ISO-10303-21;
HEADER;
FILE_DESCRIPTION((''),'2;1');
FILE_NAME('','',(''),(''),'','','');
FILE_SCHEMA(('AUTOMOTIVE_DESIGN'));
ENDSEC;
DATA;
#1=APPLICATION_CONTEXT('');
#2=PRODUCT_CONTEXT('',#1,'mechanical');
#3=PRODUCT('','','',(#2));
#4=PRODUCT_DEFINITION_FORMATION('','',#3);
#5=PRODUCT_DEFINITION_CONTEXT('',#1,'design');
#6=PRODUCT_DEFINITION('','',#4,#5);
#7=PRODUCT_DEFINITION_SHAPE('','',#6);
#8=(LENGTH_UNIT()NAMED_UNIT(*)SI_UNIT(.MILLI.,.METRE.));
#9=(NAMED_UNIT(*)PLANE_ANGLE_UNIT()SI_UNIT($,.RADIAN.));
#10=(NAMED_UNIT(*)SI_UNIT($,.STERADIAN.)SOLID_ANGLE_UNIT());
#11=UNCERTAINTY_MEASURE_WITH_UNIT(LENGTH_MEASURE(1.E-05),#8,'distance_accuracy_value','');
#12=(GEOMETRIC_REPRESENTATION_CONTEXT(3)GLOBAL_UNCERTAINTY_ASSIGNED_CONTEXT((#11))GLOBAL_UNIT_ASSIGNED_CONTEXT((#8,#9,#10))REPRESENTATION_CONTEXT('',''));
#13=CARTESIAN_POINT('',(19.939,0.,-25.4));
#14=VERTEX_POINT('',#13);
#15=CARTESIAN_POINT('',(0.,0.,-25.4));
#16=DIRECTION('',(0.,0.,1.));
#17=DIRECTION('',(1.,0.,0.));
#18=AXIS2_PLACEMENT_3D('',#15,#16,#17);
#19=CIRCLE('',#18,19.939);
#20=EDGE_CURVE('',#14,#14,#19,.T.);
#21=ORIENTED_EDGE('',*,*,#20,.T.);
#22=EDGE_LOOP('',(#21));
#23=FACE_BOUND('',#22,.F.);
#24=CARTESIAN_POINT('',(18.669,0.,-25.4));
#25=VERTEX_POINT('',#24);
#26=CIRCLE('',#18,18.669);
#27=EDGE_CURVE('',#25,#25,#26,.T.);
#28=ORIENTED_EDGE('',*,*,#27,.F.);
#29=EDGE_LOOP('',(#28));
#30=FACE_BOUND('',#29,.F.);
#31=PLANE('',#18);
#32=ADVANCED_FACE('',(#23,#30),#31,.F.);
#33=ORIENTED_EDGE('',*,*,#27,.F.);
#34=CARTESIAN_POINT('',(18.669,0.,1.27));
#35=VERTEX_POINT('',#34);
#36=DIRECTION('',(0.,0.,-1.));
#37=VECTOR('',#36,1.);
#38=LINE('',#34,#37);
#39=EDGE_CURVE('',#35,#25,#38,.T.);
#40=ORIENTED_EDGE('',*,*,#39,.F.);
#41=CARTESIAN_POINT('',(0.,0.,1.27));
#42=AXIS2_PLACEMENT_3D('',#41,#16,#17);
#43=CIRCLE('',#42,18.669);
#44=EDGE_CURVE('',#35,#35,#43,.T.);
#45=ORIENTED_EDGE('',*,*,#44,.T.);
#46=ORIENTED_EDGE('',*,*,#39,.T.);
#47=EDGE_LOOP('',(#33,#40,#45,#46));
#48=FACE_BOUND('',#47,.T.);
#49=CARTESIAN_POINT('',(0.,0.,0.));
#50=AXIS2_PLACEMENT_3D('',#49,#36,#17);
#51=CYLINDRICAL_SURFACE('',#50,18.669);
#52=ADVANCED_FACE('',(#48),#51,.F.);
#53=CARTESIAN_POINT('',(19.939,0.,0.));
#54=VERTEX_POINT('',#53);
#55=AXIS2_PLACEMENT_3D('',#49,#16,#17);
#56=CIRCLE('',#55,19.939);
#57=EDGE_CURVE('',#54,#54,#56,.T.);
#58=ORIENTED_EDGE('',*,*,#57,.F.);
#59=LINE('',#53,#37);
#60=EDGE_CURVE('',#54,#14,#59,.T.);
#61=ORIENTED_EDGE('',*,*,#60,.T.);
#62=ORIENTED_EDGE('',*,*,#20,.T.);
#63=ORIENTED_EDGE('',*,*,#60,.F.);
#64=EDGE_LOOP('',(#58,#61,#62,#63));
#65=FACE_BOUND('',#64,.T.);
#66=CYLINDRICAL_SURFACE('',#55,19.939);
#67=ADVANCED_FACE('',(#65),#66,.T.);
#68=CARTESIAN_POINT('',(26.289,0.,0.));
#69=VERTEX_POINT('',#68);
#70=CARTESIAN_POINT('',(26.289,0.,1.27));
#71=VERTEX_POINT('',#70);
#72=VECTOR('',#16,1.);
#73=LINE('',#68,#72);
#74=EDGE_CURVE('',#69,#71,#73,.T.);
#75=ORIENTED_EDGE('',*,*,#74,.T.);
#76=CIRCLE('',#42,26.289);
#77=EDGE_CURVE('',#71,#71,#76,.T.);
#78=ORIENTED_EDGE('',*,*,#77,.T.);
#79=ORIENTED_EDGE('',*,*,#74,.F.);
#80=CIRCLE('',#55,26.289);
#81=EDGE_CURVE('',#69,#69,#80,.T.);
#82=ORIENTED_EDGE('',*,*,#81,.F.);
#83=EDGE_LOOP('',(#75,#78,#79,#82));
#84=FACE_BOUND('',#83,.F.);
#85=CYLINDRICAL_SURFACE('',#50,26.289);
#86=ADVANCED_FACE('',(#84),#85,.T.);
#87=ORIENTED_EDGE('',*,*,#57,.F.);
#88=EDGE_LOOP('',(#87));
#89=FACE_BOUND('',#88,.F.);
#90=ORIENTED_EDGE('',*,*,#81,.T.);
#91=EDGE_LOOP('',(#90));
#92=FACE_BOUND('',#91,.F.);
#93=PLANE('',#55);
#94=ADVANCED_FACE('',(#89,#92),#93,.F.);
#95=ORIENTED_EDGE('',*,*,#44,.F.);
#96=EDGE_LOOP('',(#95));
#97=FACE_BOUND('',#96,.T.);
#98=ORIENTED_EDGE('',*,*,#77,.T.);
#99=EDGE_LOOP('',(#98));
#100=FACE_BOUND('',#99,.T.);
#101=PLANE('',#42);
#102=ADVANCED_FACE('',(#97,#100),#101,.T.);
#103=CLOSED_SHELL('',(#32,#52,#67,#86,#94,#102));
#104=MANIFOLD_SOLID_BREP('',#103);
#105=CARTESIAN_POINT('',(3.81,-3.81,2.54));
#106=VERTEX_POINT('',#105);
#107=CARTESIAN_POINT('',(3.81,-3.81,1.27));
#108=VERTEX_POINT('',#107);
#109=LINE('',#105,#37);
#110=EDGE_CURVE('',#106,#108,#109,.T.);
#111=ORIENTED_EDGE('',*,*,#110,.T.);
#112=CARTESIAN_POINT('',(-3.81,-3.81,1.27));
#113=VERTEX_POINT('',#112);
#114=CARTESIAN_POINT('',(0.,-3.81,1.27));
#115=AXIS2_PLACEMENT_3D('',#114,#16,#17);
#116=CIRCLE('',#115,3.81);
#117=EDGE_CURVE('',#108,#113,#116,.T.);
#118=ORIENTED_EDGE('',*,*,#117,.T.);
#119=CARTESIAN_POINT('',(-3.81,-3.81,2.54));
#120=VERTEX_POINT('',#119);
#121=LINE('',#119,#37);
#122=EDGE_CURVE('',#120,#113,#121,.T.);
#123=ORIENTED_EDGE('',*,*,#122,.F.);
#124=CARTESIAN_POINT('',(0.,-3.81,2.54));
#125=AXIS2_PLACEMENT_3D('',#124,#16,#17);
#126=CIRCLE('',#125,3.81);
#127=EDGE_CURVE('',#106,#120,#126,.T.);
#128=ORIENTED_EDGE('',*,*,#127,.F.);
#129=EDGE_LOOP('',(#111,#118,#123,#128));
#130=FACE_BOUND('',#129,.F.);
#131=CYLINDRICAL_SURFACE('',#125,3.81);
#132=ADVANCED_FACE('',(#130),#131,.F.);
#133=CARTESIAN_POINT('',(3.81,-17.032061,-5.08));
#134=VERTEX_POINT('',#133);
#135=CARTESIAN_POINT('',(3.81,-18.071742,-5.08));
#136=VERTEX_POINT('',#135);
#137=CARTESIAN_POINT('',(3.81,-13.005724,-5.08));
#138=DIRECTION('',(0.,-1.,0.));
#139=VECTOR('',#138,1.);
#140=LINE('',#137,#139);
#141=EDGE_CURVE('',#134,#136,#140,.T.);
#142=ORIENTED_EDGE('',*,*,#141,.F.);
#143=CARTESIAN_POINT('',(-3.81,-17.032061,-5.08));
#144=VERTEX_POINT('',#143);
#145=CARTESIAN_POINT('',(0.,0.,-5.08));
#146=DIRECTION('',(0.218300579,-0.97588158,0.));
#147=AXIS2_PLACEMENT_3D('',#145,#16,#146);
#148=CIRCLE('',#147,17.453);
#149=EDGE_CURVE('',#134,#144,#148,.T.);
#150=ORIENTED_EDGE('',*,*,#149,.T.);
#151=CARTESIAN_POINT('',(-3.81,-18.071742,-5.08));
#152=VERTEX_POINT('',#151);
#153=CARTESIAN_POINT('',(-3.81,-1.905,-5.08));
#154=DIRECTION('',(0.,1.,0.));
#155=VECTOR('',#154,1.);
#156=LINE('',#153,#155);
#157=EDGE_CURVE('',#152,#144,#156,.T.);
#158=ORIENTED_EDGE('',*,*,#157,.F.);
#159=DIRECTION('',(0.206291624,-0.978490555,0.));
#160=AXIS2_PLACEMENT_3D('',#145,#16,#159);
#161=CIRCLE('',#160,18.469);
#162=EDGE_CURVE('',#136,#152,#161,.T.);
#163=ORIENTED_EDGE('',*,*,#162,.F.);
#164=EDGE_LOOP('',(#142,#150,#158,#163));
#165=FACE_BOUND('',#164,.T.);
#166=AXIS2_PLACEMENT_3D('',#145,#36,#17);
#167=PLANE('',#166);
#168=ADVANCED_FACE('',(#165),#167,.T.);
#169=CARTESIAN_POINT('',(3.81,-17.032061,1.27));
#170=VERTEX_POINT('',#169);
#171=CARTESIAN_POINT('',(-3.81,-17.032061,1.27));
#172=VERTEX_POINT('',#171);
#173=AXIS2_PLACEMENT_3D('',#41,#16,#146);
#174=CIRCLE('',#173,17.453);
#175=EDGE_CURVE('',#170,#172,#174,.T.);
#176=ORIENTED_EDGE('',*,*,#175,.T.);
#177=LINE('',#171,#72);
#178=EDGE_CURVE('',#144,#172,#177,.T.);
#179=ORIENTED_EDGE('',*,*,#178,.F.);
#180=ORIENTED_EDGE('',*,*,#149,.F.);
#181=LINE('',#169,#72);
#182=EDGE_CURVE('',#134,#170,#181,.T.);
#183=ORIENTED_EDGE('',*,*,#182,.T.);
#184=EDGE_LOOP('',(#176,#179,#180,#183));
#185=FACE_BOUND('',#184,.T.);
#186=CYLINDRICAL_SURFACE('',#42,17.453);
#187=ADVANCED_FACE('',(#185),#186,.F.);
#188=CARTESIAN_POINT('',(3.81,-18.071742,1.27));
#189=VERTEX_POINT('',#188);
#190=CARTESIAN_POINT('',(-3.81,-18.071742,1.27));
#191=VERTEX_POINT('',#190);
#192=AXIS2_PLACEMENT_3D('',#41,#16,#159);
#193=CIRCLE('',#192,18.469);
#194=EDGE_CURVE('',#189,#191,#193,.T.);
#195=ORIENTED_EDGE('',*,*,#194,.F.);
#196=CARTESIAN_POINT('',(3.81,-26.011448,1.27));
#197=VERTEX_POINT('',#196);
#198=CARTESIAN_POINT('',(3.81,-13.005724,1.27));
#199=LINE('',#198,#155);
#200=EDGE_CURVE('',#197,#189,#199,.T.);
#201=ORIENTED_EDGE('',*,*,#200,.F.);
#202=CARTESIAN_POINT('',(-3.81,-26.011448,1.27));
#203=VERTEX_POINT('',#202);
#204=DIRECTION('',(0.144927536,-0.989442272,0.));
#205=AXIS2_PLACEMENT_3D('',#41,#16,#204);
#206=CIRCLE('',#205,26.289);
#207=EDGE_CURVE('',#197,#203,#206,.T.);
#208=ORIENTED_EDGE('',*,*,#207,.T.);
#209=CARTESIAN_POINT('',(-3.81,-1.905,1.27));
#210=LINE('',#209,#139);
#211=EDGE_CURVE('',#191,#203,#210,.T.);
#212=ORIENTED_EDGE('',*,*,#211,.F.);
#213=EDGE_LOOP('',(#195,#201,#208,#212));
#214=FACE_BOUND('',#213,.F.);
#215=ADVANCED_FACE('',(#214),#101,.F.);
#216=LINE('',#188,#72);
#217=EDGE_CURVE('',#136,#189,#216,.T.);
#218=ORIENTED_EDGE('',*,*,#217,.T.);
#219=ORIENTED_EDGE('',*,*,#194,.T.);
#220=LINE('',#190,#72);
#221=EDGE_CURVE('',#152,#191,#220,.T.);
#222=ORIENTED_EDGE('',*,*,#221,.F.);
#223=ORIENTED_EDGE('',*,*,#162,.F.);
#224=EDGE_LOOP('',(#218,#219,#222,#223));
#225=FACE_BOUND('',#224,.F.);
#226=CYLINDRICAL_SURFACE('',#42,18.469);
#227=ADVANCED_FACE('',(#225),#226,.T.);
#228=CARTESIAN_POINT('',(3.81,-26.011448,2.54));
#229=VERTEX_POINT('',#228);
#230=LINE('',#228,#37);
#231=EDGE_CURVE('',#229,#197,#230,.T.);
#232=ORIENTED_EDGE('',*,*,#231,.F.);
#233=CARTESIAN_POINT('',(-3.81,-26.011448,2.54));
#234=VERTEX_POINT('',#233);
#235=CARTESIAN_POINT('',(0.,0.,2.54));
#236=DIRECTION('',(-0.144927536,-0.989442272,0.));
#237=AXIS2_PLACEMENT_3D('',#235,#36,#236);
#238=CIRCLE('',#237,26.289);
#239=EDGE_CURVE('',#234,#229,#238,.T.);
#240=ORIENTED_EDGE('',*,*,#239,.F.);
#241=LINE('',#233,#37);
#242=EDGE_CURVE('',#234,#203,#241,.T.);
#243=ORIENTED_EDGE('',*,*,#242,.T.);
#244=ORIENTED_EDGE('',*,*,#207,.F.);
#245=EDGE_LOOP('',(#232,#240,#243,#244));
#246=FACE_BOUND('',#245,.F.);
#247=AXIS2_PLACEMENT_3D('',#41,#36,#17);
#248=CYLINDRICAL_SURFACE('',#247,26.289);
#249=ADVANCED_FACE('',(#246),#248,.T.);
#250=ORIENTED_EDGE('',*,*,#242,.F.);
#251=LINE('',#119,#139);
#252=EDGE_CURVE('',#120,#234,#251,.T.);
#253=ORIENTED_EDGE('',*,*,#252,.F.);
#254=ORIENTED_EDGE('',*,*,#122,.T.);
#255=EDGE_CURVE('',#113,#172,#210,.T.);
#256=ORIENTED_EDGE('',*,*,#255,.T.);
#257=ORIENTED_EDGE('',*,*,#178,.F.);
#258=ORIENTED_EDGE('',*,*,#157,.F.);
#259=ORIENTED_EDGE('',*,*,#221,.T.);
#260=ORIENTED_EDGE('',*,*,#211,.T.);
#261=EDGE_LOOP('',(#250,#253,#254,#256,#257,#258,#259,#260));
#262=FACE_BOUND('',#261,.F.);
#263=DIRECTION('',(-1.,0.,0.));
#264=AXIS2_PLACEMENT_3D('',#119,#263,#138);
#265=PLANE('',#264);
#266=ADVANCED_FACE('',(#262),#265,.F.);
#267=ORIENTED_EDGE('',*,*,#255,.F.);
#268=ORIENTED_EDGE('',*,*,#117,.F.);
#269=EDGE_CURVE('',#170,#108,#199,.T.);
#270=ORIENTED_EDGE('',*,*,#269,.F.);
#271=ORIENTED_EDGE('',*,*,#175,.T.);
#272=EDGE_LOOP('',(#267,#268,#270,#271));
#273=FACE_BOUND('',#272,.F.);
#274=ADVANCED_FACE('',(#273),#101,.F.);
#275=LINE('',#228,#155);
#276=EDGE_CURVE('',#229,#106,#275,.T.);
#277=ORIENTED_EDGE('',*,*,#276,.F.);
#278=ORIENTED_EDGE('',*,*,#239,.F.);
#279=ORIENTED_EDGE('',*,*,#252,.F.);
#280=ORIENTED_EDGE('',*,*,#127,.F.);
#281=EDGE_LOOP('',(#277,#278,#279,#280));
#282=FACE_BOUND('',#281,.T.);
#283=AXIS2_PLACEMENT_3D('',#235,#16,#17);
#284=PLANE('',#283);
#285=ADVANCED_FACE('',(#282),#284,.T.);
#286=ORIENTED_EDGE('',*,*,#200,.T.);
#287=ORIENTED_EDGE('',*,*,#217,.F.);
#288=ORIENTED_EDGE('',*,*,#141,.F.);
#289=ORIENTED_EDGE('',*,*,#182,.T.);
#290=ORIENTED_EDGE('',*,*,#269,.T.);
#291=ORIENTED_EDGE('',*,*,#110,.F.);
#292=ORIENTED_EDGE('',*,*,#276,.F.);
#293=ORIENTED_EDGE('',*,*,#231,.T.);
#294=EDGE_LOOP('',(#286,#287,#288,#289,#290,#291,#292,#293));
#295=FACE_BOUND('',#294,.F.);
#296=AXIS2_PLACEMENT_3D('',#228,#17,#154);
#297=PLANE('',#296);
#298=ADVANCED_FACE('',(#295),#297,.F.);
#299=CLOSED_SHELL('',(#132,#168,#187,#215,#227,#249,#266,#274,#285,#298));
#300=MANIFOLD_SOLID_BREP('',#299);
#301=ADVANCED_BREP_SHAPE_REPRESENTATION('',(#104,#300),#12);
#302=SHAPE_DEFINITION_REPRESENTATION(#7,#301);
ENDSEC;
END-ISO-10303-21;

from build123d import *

# Parameters (mm, degrees)
F0_R     = 19.939
F0_R_2   = 18.669
F1_DEPTH = 25.4
F0_R_3   = 26.289
F2_DEPTH = 1.27
F3_R     = 26.289
F4_DEPTH = 1.27
F5_R     = 18.469
F5_R_2   = 17.453
F6_DEPTH = 6.35
F8_DEPTH = 27.941


# Not quite as in the source:
# - a length typed as a fraction of an inch, garbled in the dataset ("3 / 203.2 mm" for 3/8 in), is restored


with BuildPart() as f1:
    # F0 (on Top) → F1 (new body)
    with BuildSketch(Plane.XY):
        Circle(F0_R)
        Circle(F0_R_2, mode=Mode.SUBTRACT)
    extrude(amount=-F1_DEPTH)

    # F0 (on Top) → F2 (join)
    with BuildSketch(Plane.XY):
        Circle(F0_R_3)
        Circle(F0_R, mode=Mode.SUBTRACT)
        Circle(F0_R)
        Circle(F0_R_2, mode=Mode.SUBTRACT)
    extrude(amount=F2_DEPTH)


with BuildPart() as f4:
    # F3 (on face) → F4 (new body)
    with BuildSketch(Plane.XY.offset(1.27)):
        Circle(F3_R)
    extrude(amount=F4_DEPTH)

    # F5 (on face) → F6 (join)
    with BuildSketch(Plane(origin=(0, 0, 1.27), x_dir=(1, 0, 0), z_dir=(0, 0, -1))):
        Circle(F5_R)
        Circle(F5_R_2, mode=Mode.SUBTRACT)
    extrude(amount=F6_DEPTH)

    # F7 (on face) → F8 (cut, through all)
    with BuildSketch(Plane.XY.offset(2.54)):
        with BuildLine():
            Line((3.81, -26.0114478836), (3.81, -3.81))
            ThreePointArc((3.81, -3.81), (0, 0), (-3.81, -3.81))
            Line((-3.81, -3.81), (-3.81, -26.0114478836))
            ThreePointArc((-3.81, -26.0114478836), (0, -26.289), (3.81, -26.0114478836))
        make_face()
    extrude(amount=-F8_DEPTH, mode=Mode.SUBTRACT)


solid = Compound([f1.part, f4.part])
